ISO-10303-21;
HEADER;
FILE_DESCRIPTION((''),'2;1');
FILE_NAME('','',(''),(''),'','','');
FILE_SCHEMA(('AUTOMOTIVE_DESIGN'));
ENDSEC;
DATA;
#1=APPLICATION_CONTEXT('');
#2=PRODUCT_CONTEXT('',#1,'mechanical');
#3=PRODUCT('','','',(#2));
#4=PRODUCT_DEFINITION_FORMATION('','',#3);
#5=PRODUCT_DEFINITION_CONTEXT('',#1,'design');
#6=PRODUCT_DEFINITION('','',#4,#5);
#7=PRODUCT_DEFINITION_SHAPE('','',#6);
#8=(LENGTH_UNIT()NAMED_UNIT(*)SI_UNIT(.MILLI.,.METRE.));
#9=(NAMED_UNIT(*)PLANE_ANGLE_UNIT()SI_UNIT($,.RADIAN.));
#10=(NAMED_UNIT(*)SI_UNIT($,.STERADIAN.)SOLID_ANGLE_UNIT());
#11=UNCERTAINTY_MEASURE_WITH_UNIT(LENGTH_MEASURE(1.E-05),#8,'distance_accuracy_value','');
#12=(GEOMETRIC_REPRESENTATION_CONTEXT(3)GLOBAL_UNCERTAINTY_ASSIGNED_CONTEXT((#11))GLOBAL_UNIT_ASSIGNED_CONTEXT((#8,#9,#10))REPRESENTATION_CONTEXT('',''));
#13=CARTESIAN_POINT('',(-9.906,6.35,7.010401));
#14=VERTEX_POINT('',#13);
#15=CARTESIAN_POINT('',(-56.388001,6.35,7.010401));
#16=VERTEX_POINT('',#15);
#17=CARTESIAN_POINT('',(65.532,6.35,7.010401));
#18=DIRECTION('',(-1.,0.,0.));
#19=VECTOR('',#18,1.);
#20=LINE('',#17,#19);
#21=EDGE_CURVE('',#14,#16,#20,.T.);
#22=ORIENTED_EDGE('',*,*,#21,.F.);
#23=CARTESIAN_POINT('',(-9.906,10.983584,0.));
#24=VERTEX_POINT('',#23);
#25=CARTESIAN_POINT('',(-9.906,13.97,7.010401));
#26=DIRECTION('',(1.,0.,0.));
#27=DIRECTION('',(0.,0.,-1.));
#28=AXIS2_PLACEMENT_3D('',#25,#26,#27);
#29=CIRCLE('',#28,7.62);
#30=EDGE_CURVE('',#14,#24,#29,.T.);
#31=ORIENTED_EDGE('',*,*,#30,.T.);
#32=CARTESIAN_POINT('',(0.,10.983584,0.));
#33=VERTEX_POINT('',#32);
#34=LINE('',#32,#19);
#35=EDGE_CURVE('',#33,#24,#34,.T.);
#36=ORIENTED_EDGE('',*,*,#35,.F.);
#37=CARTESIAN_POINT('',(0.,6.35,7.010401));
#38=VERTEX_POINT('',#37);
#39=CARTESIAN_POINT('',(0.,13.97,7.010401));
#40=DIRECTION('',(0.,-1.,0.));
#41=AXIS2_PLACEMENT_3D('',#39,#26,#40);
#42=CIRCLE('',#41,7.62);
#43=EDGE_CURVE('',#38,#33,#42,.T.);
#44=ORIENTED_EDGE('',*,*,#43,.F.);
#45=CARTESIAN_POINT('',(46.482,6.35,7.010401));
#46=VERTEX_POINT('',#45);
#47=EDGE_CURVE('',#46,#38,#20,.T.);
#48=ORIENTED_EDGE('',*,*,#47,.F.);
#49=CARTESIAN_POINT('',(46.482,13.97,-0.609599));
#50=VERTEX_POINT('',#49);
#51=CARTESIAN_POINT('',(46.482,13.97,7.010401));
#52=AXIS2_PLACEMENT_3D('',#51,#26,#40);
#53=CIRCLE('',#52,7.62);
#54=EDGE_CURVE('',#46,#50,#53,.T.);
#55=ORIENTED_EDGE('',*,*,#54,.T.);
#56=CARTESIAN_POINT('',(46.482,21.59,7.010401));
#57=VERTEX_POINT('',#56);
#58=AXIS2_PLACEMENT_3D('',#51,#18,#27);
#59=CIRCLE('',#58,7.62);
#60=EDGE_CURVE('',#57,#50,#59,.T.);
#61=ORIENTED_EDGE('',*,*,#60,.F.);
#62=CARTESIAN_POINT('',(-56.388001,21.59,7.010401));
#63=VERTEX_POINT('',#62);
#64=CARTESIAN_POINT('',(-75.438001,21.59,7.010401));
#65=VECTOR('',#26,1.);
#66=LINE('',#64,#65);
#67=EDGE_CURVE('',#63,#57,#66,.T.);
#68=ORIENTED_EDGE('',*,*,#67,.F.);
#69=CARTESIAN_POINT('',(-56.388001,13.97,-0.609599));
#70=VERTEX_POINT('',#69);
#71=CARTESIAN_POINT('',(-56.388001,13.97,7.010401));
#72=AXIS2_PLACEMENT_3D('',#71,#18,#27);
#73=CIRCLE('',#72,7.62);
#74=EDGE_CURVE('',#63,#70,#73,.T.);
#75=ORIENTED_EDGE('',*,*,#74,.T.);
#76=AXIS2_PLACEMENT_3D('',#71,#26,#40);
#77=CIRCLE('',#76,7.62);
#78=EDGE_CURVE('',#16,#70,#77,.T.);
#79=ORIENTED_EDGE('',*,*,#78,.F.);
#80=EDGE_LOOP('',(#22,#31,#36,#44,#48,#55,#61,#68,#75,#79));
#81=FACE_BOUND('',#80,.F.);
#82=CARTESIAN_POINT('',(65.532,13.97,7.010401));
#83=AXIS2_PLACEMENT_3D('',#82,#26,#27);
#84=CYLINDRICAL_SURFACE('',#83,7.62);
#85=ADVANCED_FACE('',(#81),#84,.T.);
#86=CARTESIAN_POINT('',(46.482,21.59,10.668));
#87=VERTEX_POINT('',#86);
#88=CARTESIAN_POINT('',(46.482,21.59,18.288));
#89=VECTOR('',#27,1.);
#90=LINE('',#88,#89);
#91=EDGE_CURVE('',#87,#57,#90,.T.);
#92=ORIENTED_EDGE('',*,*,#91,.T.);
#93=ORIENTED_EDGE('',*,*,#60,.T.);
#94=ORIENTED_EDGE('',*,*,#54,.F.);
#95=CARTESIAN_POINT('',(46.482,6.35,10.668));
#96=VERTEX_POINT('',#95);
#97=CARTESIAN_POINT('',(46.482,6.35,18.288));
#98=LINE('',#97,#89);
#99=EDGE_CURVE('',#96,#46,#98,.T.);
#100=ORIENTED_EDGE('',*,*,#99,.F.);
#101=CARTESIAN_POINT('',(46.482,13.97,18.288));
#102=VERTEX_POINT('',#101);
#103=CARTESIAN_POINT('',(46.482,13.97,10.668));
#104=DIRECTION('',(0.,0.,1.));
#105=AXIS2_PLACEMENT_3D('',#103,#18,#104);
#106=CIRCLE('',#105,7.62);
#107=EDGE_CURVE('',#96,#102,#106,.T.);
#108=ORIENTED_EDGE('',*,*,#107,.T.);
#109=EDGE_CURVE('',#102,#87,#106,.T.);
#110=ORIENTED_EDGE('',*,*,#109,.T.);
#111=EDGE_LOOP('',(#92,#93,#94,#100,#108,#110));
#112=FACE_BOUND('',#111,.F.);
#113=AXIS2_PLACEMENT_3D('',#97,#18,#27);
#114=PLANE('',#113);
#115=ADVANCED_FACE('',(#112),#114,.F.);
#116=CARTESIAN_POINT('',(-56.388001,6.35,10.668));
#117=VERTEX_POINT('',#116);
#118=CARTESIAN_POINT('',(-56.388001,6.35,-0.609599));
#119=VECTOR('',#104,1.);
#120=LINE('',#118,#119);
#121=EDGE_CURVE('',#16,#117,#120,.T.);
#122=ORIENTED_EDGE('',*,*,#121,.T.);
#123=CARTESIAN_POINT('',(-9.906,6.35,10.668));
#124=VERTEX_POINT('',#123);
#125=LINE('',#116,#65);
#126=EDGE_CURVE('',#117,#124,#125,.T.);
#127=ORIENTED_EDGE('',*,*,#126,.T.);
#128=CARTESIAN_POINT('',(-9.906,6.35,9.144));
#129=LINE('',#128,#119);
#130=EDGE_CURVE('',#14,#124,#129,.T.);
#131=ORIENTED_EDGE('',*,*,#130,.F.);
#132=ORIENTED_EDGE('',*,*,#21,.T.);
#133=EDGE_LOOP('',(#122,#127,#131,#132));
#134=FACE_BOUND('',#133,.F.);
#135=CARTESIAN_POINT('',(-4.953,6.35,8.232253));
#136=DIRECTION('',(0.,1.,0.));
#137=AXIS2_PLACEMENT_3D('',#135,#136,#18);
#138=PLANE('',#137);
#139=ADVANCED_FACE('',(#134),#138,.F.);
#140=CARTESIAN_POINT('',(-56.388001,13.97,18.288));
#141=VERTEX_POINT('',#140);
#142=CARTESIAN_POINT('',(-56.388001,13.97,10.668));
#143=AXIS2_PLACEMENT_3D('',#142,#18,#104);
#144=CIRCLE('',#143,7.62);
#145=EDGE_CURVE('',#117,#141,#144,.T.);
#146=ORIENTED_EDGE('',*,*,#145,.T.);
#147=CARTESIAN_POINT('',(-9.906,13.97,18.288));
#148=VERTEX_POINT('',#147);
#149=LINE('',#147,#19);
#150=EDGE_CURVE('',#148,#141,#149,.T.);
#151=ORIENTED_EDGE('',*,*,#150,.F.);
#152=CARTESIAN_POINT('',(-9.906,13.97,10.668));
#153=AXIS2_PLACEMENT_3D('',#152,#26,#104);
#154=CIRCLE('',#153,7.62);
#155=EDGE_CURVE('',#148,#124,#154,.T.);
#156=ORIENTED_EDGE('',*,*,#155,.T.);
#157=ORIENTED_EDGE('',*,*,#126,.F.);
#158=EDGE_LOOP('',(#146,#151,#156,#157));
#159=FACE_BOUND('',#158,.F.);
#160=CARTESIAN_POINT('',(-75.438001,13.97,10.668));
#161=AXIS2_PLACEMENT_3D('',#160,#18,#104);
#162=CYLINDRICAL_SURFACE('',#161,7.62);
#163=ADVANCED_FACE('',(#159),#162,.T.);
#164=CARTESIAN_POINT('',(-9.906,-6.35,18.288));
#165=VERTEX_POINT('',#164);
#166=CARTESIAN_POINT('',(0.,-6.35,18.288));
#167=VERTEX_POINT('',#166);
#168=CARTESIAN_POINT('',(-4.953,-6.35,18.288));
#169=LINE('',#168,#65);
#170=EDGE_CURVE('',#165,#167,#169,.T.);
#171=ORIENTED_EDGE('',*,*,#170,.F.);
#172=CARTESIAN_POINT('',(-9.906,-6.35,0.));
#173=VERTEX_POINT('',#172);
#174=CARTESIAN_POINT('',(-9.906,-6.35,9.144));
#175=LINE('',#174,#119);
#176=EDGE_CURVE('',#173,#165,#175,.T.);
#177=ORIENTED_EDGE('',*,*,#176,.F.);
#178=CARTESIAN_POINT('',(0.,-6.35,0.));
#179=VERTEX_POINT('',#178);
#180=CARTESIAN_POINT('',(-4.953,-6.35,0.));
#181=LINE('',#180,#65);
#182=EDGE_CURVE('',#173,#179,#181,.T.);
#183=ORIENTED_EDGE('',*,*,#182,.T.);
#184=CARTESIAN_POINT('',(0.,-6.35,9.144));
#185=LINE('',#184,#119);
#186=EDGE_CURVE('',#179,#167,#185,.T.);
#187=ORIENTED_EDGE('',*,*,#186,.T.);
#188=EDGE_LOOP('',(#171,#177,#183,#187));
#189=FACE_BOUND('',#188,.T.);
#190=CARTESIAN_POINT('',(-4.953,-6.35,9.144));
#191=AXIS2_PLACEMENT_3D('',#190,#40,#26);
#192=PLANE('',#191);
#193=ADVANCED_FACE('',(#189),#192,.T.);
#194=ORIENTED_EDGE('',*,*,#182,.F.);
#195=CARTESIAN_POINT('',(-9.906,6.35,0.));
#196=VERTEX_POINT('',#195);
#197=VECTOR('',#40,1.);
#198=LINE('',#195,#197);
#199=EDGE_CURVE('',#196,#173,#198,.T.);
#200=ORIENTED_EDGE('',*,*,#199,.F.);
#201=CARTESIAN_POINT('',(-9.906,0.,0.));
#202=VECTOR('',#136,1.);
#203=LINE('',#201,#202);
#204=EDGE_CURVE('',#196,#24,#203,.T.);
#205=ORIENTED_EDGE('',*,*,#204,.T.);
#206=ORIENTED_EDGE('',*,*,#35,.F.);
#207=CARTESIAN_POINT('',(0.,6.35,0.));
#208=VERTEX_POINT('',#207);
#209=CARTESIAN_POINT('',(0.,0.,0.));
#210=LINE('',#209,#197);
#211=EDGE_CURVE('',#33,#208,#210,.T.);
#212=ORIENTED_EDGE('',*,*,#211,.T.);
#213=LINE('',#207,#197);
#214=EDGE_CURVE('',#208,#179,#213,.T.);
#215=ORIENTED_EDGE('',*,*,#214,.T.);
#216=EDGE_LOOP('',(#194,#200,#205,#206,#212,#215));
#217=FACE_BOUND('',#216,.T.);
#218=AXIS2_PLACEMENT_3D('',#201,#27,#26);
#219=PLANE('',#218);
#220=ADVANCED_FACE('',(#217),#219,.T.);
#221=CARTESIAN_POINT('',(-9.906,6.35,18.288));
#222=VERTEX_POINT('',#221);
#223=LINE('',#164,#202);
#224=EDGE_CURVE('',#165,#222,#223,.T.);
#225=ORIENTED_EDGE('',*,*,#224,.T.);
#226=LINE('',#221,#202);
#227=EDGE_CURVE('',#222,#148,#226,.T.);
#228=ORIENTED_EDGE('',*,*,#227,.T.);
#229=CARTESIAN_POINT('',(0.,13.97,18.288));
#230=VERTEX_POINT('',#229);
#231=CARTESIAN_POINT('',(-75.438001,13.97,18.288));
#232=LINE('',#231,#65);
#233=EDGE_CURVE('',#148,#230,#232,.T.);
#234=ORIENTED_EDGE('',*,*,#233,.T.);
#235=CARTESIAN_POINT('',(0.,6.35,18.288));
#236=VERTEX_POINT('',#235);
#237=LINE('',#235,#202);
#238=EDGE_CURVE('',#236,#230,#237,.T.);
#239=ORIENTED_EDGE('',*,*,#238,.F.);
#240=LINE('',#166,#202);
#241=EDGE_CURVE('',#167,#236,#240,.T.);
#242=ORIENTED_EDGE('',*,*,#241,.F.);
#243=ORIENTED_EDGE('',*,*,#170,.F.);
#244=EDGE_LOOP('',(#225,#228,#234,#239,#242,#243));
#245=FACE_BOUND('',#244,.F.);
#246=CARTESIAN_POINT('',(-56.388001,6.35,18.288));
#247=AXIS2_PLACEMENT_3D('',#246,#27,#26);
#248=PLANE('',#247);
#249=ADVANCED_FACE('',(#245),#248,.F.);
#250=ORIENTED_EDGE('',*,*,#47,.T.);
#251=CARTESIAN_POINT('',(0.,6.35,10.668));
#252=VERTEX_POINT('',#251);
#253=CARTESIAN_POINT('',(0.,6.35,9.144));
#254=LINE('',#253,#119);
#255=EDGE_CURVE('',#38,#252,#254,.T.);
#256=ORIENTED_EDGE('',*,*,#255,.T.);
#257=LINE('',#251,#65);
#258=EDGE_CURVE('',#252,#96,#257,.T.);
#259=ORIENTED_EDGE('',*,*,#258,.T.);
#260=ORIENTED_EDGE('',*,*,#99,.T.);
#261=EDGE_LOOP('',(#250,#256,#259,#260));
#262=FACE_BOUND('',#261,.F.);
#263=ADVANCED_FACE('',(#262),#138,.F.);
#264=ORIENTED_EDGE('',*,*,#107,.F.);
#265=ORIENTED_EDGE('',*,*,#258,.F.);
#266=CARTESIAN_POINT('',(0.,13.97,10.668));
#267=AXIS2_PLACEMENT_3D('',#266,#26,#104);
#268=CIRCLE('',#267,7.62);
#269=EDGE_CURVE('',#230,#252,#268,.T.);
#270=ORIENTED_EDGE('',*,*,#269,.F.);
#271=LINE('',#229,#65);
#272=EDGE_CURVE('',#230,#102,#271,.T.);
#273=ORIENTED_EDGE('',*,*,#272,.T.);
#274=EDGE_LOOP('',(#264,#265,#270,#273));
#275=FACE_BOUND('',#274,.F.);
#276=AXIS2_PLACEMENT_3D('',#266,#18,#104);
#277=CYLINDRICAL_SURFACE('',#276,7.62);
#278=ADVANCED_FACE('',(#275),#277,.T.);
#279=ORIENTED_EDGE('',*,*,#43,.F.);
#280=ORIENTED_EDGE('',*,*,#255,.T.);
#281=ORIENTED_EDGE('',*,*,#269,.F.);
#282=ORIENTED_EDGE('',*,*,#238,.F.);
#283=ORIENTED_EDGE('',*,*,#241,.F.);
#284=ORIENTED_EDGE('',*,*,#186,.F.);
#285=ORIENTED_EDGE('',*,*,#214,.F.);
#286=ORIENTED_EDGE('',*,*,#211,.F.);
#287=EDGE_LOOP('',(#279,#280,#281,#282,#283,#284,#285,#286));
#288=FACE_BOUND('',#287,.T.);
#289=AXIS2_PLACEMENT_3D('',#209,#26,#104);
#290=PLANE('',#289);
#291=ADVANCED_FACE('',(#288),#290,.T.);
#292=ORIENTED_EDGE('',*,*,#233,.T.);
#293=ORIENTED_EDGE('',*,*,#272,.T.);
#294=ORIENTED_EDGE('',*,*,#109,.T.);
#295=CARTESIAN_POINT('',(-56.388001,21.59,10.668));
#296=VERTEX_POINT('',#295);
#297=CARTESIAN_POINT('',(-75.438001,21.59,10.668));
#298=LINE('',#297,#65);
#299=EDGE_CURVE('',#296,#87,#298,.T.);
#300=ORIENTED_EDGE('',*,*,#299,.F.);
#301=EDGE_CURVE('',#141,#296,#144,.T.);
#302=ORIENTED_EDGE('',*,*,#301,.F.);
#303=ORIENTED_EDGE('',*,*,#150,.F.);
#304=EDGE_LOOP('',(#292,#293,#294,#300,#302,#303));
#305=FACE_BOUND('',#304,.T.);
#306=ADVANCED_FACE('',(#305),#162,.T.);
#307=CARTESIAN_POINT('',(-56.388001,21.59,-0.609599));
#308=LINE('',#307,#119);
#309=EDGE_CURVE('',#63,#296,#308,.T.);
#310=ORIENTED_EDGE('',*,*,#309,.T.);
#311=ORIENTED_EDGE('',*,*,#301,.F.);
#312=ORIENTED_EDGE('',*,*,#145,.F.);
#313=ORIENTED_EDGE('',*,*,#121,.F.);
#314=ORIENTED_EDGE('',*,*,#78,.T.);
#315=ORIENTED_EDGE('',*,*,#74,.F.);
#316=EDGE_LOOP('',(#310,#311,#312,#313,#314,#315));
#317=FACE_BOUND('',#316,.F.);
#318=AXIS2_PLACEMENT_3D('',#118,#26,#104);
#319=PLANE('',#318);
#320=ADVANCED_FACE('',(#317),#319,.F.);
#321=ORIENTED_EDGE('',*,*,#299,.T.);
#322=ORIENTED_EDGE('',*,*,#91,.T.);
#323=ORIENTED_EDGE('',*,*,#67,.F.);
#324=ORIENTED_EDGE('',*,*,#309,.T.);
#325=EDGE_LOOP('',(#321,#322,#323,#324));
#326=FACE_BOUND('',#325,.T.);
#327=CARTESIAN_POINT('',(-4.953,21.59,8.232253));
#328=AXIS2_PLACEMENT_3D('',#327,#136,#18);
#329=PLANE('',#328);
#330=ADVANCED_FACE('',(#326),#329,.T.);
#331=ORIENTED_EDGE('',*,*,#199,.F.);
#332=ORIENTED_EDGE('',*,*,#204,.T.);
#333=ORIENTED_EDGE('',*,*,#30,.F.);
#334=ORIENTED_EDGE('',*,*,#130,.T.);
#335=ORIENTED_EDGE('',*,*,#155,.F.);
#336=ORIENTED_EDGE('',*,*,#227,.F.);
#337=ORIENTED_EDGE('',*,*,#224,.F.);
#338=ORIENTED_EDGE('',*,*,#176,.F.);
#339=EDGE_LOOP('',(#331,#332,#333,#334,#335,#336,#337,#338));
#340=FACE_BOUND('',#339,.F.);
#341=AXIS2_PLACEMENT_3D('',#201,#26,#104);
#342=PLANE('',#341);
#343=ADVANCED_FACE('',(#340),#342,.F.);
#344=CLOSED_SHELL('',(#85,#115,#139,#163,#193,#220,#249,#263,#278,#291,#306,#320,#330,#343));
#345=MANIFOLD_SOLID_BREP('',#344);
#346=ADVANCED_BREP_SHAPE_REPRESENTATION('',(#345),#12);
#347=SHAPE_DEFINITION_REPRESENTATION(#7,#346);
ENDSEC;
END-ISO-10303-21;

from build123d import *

# Parameters (mm, degrees)
F0_W         = 9.9060004577
F0_H         = 18.2879995555
F1_DEPTH     = 6.35
F2_W         = 9.9060004577
F2_H         = 18.2879995555
F3_DEPTH     = 15.24
F4_T1_DEPTH  = 140.9700014576
F4_T3_DEPTH  = 65.5320005
F4_T5_DEPTH  = 65.5320005
F4_T10_DEPTH = 140.9700014576
F4_T16_DEPTH = 140.9700014576
F4_T22_DEPTH = 140.9700014576
F4_T29_DEPTH = 140.9700014576
F4_T35_DEPTH = 140.9700014576
F4_T41_DEPTH = 84.5820005
F4_T46_DEPTH = 84.5820005


# Not quite as in the source:
# - a fillet or chamfer that OpenCascade refuses, or shapes differently, is made with other operations: its cross-section is extruded or revolved along the edge and cut away or added


with BuildPart() as f1:
    # F0 (on Front) → F1 (new body, symmetric)
    with BuildSketch(Plane.XZ):
        with Locations((-4.9530002289, 9.1439997777)):
            Rectangle(F0_W, F0_H)
    extrude(amount=F1_DEPTH, both=True)

    # F2 (on face) → F3 (join)
    with BuildSketch(Plane(origin=(0, 6.35, 0), x_dir=(-1, 0, 0), z_dir=(0, 1, 0))):
        Polygon((0, 18.2879995555), (-46.4820005, 18.2879995555), (-46.4820005, -0.6095990539), (56.3880009577, -0.6095990539), (56.3880009577, 18.2879995555), (9.9060004577, 18.2879995555), (9.9060004577, 0), (0, 0), align=None)
        with Locations((4.9530002289, 9.1439997777)):
            Rectangle(F2_W, F2_H)
    extrude(amount=F3_DEPTH)

    # F4: fillet of radius 7.62 on 5 edges, made by hand

    # F4_s2 → F4_t1 (cut)
    with BuildSketch(Plane.YZ.offset(-75.4380009577)):
        with BuildLine():
            ThreePointArc((13.97, -0.6095990539), (19.3581536726, 1.6222472735), (21.59, 7.0104009461))
            Line((21.59, 7.0104009461), (21.59, -0.6095990539))
            Line((21.59, -0.6095990539), (13.97, -0.6095990539))
        make_face()
        with BuildLine():
            ThreePointArc((13.97, 18.2879995555), (19.3581536726, 16.0561532281), (21.59, 10.6679995555))
            Line((21.59, 10.6679995555), (21.59, 18.2879995555))
            Line((21.59, 18.2879995555), (13.97, 18.2879995555))
        make_face()
    extrude(amount=F4_T1_DEPTH, mode=Mode.SUBTRACT)

    # F4_s4 → F4_t3 (cut)
    with BuildSketch(Plane.YZ.offset(-75.4380009577)):
        with BuildLine():
            ThreePointArc((13.97, 18.2879995555), (8.5818463274, 16.0561532281), (6.35, 10.6679995555))
            Line((6.35, 10.6679995555), (6.35, 18.2879995555))
            Line((6.35, 18.2879995555), (13.97, 18.2879995555))
        make_face()
    extrude(amount=F4_T3_DEPTH, mode=Mode.SUBTRACT)

    # F4_s6 → F4_t5 (cut)
    with BuildSketch(Plane.YZ):
        with BuildLine():
            ThreePointArc((13.97, 18.2879995555), (8.5818463274, 16.0561532281), (6.35, 10.6679995555))
            Line((6.35, 10.6679995555), (6.35, 18.2879995555))
            Line((6.35, 18.2879995555), (13.97, 18.2879995555))
        make_face()
    extrude(amount=F4_T5_DEPTH, mode=Mode.SUBTRACT)


with BuildPart() as f4_tool8:
    # F4_s9 → F4_t10 (new body)
    with BuildSketch(Plane.YZ.offset(65.5320005)):
        with BuildLine():
            ThreePointArc((13.97, -0.6095990539), (8.5818463274, 1.6222472735), (6.35, 7.0104009461))
            Line((6.35, 7.0104009461), (6.35, -0.6095990539))
            Line((6.35, -0.6095990539), (13.97, -0.6095990539))
        make_face()
    extrude(amount=-F4_T10_DEPTH)

    split(bisect_by=Plane.YZ, keep=Keep.TOP)

    split(bisect_by=Plane.XY, keep=Keep.BOTTOM)


with BuildPart() as f1_1:
    add(f1.part)

    # F4_t7: cut F4_tool8
    add(f4_tool8.part, mode=Mode.SUBTRACT)


with BuildPart() as f4_tool14:
    # F4_s15 → F4_t16 (new body)
    with BuildSketch(Plane.YZ.offset(65.5320005)):
        with BuildLine():
            ThreePointArc((13.97, -0.6095990539), (8.5818463274, 1.6222472735), (6.35, 7.0104009461))
            Line((6.35, 7.0104009461), (6.35, -0.6095990539))
            Line((6.35, -0.6095990539), (13.97, -0.6095990539))
        make_face()
    extrude(amount=-F4_T16_DEPTH)

    split(bisect_by=Plane.YZ, keep=Keep.TOP)

    split(bisect_by=Plane.XY, keep=Keep.TOP)


with BuildPart() as f1_2:
    add(f1_1.part)

    # F4_t13: cut F4_tool14
    add(f4_tool14.part, mode=Mode.SUBTRACT)


with BuildPart() as f4_tool20:
    # F4_s21 → F4_t22 (new body)
    with BuildSketch(Plane.YZ.offset(65.5320005)):
        with BuildLine():
            ThreePointArc((13.97, -0.6095990539), (8.5818463274, 1.6222472735), (6.35, 7.0104009461))
            Line((6.35, 7.0104009461), (6.35, -0.6095990539))
            Line((6.35, -0.6095990539), (13.97, -0.6095990539))
        make_face()
    extrude(amount=-F4_T22_DEPTH)

    split(bisect_by=Plane.YZ, keep=Keep.BOTTOM)

    split(bisect_by=Plane.XY, keep=Keep.BOTTOM)

    split(bisect_by=Plane.YZ.offset(-9.9060004577), keep=Keep.TOP)


with BuildPart() as f1_3:
    add(f1_2.part)

    # F4_t19: cut F4_tool20
    add(f4_tool20.part, mode=Mode.SUBTRACT)


with BuildPart() as f4_tool27:
    # F4_s28 → F4_t29 (new body)
    with BuildSketch(Plane.YZ.offset(65.5320005)):
        with BuildLine():
            ThreePointArc((13.97, -0.6095990539), (8.5818463274, 1.6222472735), (6.35, 7.0104009461))
            Line((6.35, 7.0104009461), (6.35, -0.6095990539))
            Line((6.35, -0.6095990539), (13.97, -0.6095990539))
        make_face()
    extrude(amount=-F4_T29_DEPTH)

    split(bisect_by=Plane.XY, keep=Keep.BOTTOM)

    split(bisect_by=Plane.YZ.offset(-9.9060004577), keep=Keep.BOTTOM)


with BuildPart() as f1_4:
    add(f1_3.part)

    # F4_t26: cut F4_tool27
    add(f4_tool27.part, mode=Mode.SUBTRACT)


with BuildPart() as f4_tool33:
    # F4_s34 → F4_t35 (new body)
    with BuildSketch(Plane.YZ.offset(65.5320005)):
        with BuildLine():
            ThreePointArc((13.97, -0.6095990539), (8.5818463274, 1.6222472735), (6.35, 7.0104009461))
            Line((6.35, 7.0104009461), (6.35, -0.6095990539))
            Line((6.35, -0.6095990539), (13.97, -0.6095990539))
        make_face()
    extrude(amount=-F4_T35_DEPTH)

    split(bisect_by=Plane.XY, keep=Keep.TOP)

    split(bisect_by=Plane.YZ.offset(-9.9060004577), keep=Keep.BOTTOM)


with BuildPart() as f1_5:
    add(f1_4.part)

    # F4_t32: cut F4_tool33
    add(f4_tool33.part, mode=Mode.SUBTRACT)


with BuildPart() as f4_tool39:
    # F4_s40 → F4_t41 (new body)
    with BuildSketch(Plane.YZ.offset(-75.4380009577)):
        with BuildLine():
            ThreePointArc((13.97, 18.2879995555), (8.5818463274, 16.0561532281), (6.35, 10.6679995555))
            Line((6.35, 10.6679995555), (6.35, 18.2879995555))
            Line((6.35, 18.2879995555), (13.97, 18.2879995555))
        make_face()
    extrude(amount=F4_T41_DEPTH)

    split(bisect_by=Plane.YZ, keep=Keep.TOP)


with BuildPart() as f1_6:
    add(f1_5.part)

    # F4_t38: cut F4_tool39
    add(f4_tool39.part, mode=Mode.SUBTRACT)


with BuildPart() as f4_tool44:
    # F4_s45 → F4_t46 (new body)
    with BuildSketch(Plane.YZ.offset(-19.05)):
        with BuildLine():
            ThreePointArc((13.97, 18.2879995555), (8.5818463274, 16.0561532281), (6.35, 10.6679995555))
            Line((6.35, 10.6679995555), (6.35, 18.2879995555))
            Line((6.35, 18.2879995555), (13.97, 18.2879995555))
        make_face()
    extrude(amount=F4_T46_DEPTH)

    split(bisect_by=Plane.YZ.offset(-9.9060004577), keep=Keep.BOTTOM)


with BuildPart() as f1_7:
    add(f1_6.part)

    # F4_t43: cut F4_tool44
    add(f4_tool44.part, mode=Mode.SUBTRACT)


solid = f1_7.part
